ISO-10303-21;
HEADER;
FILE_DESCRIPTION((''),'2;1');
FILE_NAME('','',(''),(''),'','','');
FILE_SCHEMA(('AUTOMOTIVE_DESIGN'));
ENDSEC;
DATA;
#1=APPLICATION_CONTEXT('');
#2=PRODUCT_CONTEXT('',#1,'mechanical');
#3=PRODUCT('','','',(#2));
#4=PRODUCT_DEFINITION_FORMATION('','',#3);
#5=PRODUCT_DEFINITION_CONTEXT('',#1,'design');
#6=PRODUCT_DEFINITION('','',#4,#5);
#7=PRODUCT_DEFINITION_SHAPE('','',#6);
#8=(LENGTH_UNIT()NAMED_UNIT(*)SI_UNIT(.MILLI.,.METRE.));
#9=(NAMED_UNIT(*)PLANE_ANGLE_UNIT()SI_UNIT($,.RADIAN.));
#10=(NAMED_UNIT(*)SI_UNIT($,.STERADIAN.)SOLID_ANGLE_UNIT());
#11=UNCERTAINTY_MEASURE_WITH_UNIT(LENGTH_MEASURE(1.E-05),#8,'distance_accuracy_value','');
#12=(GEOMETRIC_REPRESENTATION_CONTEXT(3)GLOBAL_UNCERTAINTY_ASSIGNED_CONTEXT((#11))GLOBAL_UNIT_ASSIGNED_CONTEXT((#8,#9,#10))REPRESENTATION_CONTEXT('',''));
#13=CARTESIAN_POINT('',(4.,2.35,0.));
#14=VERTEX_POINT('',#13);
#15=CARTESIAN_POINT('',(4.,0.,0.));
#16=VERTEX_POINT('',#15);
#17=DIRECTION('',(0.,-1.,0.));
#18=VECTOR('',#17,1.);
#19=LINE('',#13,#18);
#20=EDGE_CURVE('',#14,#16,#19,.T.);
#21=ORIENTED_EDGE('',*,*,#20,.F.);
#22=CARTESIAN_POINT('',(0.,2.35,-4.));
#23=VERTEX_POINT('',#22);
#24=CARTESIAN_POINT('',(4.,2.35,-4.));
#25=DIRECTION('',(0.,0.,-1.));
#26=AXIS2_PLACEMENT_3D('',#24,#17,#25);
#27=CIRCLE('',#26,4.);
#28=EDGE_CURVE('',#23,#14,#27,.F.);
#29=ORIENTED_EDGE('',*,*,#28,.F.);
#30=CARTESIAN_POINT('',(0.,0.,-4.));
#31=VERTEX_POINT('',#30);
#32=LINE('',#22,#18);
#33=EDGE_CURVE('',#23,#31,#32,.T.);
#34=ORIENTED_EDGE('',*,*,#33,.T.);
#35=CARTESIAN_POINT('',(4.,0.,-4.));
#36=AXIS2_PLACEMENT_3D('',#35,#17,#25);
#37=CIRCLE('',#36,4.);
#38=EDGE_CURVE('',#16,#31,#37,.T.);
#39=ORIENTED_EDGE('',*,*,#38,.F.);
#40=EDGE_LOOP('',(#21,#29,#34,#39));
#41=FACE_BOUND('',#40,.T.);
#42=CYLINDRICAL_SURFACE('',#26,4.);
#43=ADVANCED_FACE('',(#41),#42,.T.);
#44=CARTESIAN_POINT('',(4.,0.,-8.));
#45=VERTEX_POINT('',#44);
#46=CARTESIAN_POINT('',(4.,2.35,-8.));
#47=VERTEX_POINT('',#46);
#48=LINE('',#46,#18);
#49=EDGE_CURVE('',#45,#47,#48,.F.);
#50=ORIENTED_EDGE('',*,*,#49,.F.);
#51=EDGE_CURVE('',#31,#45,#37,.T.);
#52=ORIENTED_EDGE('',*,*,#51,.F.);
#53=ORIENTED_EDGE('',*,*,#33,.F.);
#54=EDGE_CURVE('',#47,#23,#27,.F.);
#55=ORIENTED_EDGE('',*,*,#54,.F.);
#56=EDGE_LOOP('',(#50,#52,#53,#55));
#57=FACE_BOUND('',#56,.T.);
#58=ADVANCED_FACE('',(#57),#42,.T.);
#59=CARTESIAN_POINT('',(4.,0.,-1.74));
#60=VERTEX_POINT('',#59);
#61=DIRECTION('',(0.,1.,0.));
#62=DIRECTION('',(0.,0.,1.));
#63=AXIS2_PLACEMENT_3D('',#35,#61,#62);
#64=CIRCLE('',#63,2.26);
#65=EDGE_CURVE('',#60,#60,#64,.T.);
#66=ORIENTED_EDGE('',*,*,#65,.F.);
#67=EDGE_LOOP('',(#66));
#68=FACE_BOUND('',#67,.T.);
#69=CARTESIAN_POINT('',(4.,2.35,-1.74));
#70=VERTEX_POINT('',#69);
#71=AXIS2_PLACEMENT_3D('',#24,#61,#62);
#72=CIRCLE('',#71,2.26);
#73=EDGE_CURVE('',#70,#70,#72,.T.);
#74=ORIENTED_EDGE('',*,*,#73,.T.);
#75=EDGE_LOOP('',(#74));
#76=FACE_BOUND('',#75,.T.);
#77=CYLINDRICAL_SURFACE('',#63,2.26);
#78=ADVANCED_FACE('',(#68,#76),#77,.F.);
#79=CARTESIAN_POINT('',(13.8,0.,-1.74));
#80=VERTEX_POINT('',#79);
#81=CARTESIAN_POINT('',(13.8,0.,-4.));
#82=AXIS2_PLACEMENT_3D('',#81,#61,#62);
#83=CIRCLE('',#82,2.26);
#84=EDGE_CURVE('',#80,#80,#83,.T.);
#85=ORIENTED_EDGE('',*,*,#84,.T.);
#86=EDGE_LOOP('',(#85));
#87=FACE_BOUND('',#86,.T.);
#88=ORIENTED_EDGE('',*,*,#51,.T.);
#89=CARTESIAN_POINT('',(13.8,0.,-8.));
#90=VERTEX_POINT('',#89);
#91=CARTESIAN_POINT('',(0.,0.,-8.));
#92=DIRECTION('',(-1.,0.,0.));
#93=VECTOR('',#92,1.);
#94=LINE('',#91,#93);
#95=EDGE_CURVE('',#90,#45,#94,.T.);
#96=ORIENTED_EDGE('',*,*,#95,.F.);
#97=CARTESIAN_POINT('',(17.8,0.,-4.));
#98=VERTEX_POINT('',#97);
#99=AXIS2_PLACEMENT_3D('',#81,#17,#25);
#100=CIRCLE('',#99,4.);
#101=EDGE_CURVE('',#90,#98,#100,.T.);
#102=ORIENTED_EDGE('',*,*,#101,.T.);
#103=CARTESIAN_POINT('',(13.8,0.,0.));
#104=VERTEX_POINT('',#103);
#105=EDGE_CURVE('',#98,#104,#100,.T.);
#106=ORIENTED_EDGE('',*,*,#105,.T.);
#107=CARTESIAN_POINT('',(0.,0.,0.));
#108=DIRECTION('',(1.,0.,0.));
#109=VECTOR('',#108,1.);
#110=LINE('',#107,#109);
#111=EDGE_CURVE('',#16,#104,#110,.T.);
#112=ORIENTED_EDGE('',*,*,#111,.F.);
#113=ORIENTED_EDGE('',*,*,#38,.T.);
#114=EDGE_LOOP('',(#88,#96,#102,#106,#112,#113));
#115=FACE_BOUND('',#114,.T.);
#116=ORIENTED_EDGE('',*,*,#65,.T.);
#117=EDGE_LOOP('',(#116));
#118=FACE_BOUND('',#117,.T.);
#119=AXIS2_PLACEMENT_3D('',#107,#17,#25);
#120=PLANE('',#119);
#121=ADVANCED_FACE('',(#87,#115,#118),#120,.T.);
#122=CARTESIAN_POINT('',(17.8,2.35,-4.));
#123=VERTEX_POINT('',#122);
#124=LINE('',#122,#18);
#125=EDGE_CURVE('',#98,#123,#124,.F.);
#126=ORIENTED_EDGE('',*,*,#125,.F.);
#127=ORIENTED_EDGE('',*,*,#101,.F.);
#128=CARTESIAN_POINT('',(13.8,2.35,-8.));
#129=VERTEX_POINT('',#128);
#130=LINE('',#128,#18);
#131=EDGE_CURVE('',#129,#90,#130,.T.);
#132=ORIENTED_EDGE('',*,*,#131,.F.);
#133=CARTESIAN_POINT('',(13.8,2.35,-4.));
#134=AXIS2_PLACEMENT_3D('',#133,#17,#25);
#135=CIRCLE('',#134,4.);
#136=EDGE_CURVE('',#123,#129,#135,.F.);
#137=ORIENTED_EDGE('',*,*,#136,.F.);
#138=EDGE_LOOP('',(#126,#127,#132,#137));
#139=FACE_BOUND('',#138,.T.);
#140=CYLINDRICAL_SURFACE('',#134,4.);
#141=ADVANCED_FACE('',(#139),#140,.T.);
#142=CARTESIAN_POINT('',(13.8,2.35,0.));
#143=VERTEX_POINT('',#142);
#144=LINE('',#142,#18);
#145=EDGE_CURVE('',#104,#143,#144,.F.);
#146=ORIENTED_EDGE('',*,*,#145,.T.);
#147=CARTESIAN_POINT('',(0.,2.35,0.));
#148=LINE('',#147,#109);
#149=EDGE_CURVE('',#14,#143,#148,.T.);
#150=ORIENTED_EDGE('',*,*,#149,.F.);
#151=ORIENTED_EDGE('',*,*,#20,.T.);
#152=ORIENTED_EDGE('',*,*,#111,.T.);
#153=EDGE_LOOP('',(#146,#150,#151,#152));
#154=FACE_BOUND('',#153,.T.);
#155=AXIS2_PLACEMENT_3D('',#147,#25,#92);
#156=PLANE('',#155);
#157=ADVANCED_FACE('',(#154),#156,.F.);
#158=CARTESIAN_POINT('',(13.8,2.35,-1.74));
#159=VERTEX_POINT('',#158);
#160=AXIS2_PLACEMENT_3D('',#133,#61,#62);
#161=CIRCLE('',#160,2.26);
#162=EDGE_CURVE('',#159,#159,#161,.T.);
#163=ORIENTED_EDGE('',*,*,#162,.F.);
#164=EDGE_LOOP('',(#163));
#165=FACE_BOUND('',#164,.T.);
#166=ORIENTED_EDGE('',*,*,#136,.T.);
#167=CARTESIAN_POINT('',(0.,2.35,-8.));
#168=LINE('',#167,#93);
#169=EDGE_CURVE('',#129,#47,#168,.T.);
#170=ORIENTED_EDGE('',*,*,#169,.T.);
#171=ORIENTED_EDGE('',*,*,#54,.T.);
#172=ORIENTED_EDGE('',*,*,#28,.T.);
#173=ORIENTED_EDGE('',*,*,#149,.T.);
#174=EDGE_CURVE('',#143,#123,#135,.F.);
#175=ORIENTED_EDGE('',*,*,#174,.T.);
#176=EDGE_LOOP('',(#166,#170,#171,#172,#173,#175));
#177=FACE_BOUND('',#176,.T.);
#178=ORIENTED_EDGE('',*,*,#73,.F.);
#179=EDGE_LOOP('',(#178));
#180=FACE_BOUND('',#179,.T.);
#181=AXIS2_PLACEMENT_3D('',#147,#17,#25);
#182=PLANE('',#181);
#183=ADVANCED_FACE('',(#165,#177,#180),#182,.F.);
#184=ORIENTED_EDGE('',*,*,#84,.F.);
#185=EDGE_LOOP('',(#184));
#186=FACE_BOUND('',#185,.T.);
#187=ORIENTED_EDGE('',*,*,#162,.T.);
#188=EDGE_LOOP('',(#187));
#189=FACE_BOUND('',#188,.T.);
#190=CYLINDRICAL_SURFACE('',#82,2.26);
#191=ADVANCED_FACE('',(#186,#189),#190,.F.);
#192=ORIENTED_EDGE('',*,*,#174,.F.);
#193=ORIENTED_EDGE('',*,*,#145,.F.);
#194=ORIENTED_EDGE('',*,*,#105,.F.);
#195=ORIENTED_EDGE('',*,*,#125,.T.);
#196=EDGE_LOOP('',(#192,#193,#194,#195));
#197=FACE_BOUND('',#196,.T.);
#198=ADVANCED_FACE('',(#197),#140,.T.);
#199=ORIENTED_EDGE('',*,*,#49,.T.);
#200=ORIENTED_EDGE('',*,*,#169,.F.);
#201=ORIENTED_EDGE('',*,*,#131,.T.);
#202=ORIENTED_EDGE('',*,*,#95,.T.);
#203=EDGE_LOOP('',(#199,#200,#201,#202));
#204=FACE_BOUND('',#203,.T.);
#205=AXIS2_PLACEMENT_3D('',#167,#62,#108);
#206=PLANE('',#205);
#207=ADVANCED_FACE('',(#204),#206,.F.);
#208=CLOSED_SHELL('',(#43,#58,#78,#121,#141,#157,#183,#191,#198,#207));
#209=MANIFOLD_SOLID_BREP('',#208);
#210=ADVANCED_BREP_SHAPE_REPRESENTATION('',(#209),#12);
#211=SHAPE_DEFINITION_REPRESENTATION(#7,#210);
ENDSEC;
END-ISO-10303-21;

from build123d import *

# Parameters (mm, degrees)
SKETCH1_W           = 17.8
SKETCH1_H           = 8
BOSS_EXTRUDE1_DEPTH = 2.35
SKETCH2_R           = 2.26
CUT_EXTRUDE1_DEPTH  = 20.656105922
FILLET1_R           = 4


with BuildPart() as part:
    # Sketch1 → Boss-Extrude1 (new body)
    with BuildSketch(Plane(origin=(0, 0, 0), x_dir=(1, 0, 0), z_dir=(0, 1, 0))):
        with Locations((8.9, 4)):
            Rectangle(SKETCH1_W, SKETCH1_H)
    extrude(amount=BOSS_EXTRUDE1_DEPTH)

    # Sketch2 → Cut-Extrude1 (cut, through all)
    with BuildSketch(Plane(origin=(0, 2.35, 0), x_dir=(1, 0, 0), z_dir=(0, 1, 0))):
        with Locations(Location((4, 4, 0), (0, 0, 270))):
            Circle(SKETCH2_R)
        with Locations(Location((13.8, 4, 0), (0, 0, 270))):
            Circle(SKETCH2_R)
    extrude(amount=-CUT_EXTRUDE1_DEPTH, mode=Mode.SUBTRACT)

    # Fillet1
    fillet1_edges = [part.edges().sort_by_distance(p)[0] for p in [
        (17.8, 1.175, 0),
        (0, 1.175, 0),
        (17.8, 1.175, -8),
        (0, 1.175, -8),
    ]]
    fillet(fillet1_edges, radius=FILLET1_R - 0.0001)  # a hair under: the kernel refuses the full size


solid = part.part
